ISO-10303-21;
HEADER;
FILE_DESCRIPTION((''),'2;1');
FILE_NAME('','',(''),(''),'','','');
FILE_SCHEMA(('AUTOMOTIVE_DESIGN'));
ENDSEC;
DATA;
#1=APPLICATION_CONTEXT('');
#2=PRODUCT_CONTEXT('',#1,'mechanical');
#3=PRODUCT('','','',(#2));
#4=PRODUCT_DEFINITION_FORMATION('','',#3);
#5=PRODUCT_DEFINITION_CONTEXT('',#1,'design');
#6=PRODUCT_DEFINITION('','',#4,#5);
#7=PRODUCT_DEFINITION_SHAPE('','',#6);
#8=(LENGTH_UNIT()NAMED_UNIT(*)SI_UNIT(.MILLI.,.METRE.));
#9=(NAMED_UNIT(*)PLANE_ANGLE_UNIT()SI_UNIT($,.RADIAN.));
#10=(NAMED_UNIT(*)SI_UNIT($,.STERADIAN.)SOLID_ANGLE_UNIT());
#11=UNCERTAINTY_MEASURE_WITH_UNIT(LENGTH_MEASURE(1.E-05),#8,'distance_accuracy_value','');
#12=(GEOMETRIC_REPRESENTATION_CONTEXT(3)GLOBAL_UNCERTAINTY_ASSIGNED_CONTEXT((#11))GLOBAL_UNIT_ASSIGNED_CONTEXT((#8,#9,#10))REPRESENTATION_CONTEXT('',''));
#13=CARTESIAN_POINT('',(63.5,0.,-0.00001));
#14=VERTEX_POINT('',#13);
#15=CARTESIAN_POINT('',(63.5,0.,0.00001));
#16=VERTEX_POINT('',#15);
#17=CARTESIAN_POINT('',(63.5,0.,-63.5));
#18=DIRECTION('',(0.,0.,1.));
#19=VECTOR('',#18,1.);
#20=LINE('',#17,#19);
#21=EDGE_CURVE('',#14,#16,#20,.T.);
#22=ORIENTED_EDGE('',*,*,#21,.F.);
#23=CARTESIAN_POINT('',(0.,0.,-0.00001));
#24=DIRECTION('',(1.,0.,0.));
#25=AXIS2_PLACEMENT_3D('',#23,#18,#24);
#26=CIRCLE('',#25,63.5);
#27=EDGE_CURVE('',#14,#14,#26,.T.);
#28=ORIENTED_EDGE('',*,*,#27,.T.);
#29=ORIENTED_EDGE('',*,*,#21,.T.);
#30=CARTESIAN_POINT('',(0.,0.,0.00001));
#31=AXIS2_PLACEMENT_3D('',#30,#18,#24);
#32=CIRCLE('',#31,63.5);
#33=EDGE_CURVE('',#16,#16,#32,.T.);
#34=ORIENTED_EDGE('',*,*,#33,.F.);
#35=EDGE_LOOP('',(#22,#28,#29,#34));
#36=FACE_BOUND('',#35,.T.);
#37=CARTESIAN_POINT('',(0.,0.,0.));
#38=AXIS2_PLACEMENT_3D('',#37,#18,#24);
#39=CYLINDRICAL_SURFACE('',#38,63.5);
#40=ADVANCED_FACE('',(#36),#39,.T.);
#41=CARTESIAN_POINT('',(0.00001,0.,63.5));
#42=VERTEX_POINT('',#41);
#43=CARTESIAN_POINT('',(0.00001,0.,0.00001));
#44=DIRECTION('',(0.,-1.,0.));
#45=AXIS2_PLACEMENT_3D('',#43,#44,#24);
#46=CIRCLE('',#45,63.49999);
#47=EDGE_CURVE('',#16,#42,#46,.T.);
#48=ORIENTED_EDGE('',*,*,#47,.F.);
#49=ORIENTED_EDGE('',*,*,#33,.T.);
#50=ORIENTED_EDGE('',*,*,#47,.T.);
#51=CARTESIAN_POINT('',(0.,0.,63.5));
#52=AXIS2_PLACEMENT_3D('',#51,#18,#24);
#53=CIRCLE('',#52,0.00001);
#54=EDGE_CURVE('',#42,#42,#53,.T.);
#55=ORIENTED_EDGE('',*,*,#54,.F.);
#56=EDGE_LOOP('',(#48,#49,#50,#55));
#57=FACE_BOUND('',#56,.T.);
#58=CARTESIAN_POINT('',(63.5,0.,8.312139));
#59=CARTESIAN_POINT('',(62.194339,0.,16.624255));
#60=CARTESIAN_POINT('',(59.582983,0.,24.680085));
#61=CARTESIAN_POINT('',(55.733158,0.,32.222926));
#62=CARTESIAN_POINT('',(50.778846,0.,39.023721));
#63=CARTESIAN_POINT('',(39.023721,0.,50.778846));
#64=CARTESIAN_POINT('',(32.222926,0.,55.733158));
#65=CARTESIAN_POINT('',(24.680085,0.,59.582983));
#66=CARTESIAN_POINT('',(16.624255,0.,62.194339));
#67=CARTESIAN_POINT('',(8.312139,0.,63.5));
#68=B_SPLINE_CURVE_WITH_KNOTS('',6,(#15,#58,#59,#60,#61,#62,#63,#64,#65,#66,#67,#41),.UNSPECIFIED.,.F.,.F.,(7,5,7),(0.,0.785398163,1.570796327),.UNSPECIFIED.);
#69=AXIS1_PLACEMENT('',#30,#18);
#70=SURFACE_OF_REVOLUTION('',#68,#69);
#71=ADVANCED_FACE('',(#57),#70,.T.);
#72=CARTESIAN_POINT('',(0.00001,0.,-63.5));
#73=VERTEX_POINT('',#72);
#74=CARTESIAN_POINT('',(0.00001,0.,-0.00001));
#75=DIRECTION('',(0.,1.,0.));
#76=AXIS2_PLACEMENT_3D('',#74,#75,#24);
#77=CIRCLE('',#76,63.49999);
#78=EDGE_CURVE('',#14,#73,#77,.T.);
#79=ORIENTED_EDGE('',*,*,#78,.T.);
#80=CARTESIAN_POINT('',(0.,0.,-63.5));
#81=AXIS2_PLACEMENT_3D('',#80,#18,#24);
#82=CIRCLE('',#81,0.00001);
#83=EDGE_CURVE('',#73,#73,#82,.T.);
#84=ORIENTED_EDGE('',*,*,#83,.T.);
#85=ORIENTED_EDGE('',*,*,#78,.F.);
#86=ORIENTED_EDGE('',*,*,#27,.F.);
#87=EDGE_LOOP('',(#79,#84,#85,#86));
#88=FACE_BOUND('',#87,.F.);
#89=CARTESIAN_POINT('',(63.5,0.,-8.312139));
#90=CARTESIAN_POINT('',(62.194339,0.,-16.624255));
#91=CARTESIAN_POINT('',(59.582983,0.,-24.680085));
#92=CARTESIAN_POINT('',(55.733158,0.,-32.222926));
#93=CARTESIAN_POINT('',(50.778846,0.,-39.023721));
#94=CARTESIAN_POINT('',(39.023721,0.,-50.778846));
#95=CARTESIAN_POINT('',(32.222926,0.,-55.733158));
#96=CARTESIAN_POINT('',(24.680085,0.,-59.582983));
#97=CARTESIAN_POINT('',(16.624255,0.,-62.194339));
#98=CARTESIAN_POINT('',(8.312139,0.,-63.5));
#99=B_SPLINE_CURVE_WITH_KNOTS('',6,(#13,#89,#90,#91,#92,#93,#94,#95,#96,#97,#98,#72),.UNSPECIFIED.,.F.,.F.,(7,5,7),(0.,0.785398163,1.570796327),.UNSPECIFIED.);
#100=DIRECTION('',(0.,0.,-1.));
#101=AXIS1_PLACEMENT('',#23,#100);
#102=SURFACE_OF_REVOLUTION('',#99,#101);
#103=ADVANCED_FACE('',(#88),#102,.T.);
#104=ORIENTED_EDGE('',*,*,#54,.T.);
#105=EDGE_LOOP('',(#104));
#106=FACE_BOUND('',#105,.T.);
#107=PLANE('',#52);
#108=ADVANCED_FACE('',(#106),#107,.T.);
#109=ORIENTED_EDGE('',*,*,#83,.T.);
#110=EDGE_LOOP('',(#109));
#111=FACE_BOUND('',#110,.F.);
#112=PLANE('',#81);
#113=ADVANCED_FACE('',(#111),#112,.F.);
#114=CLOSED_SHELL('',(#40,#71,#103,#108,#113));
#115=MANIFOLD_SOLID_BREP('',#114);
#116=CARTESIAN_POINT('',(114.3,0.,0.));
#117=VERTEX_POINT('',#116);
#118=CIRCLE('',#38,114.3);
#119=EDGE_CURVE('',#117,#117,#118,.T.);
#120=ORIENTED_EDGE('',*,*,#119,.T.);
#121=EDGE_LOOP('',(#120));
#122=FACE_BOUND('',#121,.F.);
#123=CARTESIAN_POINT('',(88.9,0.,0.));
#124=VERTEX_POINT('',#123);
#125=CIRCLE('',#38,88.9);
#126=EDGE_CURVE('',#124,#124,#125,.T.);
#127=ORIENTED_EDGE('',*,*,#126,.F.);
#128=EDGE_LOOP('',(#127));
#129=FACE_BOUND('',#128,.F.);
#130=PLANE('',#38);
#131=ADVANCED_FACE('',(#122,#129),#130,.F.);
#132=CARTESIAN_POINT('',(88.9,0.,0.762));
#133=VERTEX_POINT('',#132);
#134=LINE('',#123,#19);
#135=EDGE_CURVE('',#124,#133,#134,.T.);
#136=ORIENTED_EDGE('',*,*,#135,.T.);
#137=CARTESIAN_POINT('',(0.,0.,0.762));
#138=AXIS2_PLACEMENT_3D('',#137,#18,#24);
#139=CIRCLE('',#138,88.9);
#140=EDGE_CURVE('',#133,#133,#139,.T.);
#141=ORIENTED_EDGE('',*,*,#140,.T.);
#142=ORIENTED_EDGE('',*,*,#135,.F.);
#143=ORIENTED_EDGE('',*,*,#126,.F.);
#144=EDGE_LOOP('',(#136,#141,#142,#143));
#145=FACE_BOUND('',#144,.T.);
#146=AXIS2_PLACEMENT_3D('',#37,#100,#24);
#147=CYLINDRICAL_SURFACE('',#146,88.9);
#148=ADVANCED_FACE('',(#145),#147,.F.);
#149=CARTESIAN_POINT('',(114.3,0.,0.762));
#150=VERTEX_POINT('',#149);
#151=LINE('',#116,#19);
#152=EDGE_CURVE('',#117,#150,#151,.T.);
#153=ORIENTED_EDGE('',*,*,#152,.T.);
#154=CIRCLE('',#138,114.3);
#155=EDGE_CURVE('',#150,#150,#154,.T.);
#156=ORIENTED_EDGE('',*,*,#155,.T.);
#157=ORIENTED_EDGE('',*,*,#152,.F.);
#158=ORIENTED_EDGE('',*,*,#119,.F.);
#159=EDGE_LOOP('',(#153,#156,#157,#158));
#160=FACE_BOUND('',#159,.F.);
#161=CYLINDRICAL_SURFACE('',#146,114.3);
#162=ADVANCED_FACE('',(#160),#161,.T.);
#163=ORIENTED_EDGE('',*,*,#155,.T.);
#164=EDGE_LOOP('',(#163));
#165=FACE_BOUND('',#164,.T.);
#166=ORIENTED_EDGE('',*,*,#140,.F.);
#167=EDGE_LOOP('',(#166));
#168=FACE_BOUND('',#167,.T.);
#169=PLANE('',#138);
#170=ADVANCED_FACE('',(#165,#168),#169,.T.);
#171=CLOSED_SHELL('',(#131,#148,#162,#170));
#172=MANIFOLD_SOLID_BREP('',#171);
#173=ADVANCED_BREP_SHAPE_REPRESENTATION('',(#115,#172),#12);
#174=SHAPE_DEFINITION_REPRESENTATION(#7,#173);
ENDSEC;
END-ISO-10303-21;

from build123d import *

# Parameters (mm, degrees)
F0_R     = 63.5
F1_DEPTH = 63.5
F2_DEPTH = 63.5
F3_R     = 63.49999
F4_R     = 114.3
F4_R_2   = 88.9
F5_DEPTH = 0.762


# Not quite as in the source:
# - a fillet or chamfer is up to 0.001 mm smaller than in the source, because OpenCascade refuses the exact size


with BuildPart() as f1:
    # F0 (on Top) → F1 (new body)
    with BuildSketch(Plane.XY):
        Circle(F0_R)
    extrude(amount=F1_DEPTH)

    # F2 (add): a face of the model
    f2_faces = [f1.faces().sort_by_distance(p)[0] for p in [
        (0, 0, 0),
    ]]
    extrude(f2_faces, amount=F2_DEPTH)

    # F3 (radius 63.5 in the source; OpenCascade refuses exactly that, so slightly less here)
    f3_edges = [f1.edges().sort_by_distance(p)[0] for p in [
        (63.5, 0, 31.75),
        (-63.5, 0, 0),
        (-63.5, 0, 63.5),
        (63.5, 0, -31.75),
        (-63.5, 0, -63.5),
    ]]
    fillet(f3_edges, radius=F3_R)


with BuildPart() as f5:
    # F4 (on Top) → F5 (new body)
    with BuildSketch(Plane.XY):
        Circle(F4_R)
        Circle(F4_R_2, mode=Mode.SUBTRACT)
    extrude(amount=F5_DEPTH)


solid = Compound([f1.part, f5.part])
